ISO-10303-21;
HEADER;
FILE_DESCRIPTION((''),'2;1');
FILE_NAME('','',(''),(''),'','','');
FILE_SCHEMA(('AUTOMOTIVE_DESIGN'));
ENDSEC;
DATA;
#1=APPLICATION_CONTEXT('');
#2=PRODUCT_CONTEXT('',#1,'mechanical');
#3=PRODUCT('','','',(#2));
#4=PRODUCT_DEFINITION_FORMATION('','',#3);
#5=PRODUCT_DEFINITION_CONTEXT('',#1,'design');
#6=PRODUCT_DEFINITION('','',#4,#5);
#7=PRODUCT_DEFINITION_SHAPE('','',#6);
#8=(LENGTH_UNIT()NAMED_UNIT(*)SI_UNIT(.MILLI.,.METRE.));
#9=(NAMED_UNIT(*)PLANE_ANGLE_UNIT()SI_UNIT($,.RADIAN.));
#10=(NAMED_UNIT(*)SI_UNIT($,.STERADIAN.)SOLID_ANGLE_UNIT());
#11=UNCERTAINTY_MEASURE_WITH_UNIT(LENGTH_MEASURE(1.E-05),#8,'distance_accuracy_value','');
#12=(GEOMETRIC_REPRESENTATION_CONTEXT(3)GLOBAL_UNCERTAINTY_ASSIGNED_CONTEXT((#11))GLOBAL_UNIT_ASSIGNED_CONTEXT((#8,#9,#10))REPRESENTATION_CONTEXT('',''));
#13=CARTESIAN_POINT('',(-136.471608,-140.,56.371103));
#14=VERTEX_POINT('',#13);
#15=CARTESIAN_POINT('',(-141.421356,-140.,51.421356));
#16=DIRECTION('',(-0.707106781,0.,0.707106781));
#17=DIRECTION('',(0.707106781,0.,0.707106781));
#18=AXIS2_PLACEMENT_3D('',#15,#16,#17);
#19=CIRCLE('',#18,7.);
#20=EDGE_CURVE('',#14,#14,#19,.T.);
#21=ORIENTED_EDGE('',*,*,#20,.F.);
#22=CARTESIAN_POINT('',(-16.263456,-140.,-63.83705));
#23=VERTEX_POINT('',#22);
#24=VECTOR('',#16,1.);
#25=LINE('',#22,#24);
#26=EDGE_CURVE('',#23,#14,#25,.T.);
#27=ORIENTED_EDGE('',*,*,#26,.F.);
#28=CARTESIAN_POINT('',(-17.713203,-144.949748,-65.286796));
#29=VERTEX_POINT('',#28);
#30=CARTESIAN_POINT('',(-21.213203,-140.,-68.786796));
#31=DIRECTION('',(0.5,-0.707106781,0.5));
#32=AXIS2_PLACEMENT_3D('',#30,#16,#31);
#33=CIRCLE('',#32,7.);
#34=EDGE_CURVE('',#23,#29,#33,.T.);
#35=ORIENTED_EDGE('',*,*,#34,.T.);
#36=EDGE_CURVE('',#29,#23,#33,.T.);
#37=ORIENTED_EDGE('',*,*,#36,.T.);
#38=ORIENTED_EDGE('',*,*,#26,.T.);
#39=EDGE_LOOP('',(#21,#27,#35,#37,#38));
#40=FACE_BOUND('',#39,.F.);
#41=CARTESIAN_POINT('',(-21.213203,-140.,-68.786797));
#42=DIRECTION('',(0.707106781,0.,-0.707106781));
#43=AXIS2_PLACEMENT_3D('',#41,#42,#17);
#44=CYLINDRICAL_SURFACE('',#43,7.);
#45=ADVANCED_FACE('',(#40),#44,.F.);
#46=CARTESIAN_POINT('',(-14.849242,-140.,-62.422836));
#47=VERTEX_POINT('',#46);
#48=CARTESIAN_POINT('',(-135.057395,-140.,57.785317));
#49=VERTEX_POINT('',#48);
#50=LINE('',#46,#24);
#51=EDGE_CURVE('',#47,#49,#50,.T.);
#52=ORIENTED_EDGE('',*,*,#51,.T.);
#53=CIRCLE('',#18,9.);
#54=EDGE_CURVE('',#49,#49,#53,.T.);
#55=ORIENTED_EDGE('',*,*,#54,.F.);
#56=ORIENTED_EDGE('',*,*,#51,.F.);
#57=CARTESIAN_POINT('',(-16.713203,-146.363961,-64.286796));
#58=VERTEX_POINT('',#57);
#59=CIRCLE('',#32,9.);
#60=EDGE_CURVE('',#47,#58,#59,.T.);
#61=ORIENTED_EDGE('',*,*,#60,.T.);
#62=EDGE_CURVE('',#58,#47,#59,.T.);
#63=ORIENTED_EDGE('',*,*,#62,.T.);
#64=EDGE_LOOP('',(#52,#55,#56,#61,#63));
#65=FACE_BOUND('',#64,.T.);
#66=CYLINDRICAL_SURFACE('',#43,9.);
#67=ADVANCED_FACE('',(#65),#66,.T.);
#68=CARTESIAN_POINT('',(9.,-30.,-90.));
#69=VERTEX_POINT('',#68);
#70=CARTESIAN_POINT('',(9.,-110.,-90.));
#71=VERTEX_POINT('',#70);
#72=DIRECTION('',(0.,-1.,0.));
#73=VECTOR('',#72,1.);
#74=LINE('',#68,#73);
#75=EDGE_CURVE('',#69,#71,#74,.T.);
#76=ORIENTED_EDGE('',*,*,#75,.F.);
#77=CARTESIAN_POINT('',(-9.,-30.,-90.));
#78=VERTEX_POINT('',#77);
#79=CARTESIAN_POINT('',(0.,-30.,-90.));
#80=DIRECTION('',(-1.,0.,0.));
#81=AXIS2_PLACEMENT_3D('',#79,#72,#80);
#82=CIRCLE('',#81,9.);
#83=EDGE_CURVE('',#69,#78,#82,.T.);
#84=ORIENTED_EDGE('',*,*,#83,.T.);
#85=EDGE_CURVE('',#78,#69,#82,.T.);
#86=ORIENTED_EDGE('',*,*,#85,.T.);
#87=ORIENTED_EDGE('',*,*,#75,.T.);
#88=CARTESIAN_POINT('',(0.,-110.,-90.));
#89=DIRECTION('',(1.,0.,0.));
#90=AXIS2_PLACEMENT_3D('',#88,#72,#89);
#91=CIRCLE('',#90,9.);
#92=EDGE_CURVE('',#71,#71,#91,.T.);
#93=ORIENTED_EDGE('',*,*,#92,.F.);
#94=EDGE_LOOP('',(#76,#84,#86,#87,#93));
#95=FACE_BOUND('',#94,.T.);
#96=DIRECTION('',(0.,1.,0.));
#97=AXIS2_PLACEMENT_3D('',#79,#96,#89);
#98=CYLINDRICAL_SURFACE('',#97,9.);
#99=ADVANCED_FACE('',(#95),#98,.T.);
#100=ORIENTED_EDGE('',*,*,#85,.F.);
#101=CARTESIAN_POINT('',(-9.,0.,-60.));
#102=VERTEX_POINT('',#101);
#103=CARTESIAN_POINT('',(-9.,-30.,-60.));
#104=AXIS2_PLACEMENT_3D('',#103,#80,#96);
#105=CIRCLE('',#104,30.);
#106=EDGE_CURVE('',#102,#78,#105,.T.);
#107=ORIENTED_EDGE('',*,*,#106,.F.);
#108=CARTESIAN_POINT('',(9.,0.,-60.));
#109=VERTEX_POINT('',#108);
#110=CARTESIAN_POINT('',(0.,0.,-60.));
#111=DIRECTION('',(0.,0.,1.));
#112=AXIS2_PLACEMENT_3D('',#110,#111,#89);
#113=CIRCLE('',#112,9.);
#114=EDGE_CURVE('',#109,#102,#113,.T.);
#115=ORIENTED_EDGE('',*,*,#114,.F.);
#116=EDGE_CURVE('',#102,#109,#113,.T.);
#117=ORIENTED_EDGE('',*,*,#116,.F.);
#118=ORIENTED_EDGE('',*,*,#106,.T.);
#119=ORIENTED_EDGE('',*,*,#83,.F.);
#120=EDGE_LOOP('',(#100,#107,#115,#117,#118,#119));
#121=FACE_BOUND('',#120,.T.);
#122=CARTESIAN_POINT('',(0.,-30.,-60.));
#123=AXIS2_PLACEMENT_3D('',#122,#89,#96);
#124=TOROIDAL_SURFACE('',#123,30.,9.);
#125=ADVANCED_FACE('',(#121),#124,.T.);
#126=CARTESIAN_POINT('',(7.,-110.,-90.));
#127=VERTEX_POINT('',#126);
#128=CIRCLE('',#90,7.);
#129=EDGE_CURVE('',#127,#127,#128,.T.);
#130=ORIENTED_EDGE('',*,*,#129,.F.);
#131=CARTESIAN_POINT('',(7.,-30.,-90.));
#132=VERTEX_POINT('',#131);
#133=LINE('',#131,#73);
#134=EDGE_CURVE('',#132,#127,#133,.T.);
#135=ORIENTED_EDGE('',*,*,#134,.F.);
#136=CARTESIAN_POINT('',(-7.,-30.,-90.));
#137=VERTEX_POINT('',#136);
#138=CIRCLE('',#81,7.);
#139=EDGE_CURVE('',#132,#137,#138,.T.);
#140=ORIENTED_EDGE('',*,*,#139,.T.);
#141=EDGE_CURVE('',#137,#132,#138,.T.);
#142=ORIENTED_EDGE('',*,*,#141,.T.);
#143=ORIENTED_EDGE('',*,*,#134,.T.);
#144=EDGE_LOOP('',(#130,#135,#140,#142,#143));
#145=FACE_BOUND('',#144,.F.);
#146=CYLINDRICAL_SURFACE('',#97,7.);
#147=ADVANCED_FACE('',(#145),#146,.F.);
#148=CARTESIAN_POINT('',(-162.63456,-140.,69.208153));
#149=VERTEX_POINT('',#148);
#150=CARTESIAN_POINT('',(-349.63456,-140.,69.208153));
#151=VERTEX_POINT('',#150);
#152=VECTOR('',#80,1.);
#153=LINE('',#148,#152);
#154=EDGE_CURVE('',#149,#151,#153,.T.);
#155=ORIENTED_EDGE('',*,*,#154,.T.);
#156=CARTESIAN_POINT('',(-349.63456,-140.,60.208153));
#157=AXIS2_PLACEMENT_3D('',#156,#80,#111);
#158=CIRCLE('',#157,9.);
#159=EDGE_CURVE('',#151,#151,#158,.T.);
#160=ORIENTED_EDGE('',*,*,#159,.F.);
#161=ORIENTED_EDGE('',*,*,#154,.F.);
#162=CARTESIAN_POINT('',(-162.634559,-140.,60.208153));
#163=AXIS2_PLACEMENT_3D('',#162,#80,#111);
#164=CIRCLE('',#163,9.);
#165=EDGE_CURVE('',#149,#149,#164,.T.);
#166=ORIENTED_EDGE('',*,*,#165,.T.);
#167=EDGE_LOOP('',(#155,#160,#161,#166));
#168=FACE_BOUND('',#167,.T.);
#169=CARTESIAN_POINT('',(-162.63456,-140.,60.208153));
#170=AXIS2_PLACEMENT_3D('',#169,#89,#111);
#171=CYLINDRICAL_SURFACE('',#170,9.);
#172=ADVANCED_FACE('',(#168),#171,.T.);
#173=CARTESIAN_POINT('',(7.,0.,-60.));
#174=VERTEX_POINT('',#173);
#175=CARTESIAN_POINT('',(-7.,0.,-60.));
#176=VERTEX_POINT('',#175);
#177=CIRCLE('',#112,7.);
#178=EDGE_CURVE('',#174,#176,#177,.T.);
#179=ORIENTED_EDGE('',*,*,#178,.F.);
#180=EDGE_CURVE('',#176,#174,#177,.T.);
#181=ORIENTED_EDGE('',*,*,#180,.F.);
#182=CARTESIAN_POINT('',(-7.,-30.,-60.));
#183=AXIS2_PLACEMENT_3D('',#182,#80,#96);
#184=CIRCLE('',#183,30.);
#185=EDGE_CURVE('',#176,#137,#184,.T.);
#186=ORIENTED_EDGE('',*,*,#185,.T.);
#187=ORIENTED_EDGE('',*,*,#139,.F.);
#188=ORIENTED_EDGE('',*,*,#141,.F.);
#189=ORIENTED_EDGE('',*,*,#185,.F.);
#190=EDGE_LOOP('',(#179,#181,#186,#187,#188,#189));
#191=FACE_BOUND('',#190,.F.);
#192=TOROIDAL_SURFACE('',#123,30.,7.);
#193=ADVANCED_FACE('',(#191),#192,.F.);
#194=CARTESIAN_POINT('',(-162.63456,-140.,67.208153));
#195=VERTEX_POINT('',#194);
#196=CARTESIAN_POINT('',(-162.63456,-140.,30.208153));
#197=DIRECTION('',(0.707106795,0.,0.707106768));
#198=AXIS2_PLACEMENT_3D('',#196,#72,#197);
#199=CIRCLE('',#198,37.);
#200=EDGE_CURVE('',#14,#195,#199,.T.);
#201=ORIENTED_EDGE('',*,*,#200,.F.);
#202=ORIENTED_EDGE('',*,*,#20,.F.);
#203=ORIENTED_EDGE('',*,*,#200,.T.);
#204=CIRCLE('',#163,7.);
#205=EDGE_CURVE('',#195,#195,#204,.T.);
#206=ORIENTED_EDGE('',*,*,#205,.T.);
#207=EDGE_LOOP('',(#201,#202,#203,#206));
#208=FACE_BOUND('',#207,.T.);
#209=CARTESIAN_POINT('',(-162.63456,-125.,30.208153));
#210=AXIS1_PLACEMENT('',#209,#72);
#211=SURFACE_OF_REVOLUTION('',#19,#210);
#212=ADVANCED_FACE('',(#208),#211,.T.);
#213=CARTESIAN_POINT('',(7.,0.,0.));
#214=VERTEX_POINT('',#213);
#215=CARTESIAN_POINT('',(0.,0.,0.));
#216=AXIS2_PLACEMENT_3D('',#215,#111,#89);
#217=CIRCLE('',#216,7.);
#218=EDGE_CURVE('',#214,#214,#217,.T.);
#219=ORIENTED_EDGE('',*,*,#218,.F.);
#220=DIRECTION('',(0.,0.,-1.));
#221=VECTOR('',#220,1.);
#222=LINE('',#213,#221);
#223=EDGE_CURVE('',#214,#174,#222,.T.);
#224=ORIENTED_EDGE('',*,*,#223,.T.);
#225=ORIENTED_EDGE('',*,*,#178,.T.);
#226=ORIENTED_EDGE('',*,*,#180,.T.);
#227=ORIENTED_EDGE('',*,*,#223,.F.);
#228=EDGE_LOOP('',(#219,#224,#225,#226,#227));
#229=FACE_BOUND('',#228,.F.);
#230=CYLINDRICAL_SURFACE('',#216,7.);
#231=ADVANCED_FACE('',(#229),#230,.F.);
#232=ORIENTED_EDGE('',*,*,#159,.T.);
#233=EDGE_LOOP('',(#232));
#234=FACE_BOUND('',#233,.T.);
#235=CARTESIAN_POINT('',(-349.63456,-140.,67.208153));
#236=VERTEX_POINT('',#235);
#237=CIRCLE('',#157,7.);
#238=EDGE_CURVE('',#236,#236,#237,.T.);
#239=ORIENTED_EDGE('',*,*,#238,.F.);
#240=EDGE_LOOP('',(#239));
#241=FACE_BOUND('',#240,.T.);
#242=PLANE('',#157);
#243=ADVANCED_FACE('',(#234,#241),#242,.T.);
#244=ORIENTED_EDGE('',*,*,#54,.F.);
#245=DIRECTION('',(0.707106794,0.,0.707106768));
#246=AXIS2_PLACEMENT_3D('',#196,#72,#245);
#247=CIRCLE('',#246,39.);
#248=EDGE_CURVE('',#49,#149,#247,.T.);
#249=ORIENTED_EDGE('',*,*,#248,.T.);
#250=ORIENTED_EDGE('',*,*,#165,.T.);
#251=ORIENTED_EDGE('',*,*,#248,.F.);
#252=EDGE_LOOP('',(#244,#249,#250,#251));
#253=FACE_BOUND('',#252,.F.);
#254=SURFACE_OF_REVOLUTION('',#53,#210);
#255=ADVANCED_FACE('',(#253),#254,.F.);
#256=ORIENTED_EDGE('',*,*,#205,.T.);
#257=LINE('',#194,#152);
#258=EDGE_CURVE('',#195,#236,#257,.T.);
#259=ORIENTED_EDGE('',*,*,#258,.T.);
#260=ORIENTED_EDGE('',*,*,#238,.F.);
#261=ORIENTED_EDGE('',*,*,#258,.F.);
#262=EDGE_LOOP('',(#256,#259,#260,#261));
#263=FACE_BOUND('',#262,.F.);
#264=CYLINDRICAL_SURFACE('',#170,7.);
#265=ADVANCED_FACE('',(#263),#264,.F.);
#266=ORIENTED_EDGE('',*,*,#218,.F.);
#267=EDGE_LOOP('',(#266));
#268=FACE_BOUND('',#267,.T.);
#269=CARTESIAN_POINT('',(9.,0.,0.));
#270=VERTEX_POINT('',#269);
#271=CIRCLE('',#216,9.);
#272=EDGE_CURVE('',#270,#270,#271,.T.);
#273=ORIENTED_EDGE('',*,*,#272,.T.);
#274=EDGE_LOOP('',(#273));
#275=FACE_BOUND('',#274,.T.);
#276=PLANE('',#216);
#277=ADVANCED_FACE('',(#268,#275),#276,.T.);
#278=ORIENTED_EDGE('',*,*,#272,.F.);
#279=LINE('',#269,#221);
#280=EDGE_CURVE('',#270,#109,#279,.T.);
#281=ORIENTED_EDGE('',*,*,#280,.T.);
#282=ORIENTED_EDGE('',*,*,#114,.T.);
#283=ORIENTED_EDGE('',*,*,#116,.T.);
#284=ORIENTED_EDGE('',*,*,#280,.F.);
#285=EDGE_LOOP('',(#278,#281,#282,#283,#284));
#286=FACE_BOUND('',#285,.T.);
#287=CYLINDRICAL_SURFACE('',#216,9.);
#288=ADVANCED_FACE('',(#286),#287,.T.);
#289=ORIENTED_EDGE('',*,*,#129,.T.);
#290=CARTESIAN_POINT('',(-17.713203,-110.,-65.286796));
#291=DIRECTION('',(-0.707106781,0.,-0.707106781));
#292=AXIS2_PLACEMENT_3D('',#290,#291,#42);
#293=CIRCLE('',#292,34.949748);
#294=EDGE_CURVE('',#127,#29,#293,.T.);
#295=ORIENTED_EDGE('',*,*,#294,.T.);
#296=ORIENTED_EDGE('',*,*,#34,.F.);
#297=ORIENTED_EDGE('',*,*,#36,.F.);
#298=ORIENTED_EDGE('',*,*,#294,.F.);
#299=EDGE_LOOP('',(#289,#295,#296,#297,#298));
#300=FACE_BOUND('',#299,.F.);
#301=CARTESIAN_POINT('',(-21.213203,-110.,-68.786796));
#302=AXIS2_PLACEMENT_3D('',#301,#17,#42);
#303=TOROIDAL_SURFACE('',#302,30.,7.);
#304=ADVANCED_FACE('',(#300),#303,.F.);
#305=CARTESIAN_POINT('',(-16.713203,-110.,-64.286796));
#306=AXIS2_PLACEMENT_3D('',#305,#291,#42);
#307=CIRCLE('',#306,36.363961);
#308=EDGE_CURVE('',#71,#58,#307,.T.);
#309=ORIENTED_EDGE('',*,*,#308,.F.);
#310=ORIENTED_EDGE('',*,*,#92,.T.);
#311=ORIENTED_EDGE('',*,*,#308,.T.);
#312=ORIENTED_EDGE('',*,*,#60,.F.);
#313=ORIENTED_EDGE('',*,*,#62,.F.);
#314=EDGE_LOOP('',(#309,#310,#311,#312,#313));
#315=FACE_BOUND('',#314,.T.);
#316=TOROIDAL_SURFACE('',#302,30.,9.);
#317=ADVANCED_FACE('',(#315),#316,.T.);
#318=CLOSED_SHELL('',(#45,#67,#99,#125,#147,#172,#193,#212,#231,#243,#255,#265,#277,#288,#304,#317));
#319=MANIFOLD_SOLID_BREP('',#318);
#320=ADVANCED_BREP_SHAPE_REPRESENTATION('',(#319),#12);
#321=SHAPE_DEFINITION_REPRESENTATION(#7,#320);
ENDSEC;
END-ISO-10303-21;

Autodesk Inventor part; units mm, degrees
ref_plane "YZ Plane" through (0, 0, 0) normal (1, 0, 0) x (0, 1, 0)
ref_plane "XZ Plane" through (0, 0, 0) normal (0, 1, 0) x (-1, 0, 0)
ref_plane "XY Plane" through (0, 0, 0) normal (0, 0, 1) x (1, 0, 0)
sketch "Esboço1" plane through (0, 0, 0) normal (0, 0, 1) x (1, 0, 0)
  circle A0 centre (0, 0) radius 7
  circle A1 centre (0, 0) radius 9
  dimension "d0" = 14
  dimension "d1" = 18
sketch "Esboço1 outline for Extrusão1" plane through (0, 0, 0) normal (0, 0, 1) x (1, 0, 0)
  circle A0 centre (0, 0) radius 9
  circle A1 centre (0, 0) radius 7
extrude "Extrusão1" add sketch "Esboço1 outline for Extrusão1" against normal blind 60
sketch "Esboço8" plane through (0, 0, -60) normal (0, 0, -1) x (-1, 0, 0)
  circle A0 centre (0, 0) radius 9 projected
  circle A1 centre (0, 0) radius 7 projected
  line L0 (0, 0) -> (0, -30)
  line L1 (-15, -30) -> (15, -30)
  dimension "d18" = 30
  dimension "d19" = 30
sketch "Esboço8 outline for Revolução4" plane through (0, 0, -60) normal (0, 0, -1) x (-1, 0, 0)
  circle A0 centre (0, 0) radius 9
  circle A1 centre (0, 0) radius 7
revolve "Revolução4" add sketch "Esboço8 outline for Revolução4" angle 90 about axis through (15, -30, -60) along (-1, 0, 0)
sketch "Esboço9" plane through (0, -30, -90) normal (0, -1, 0) x (1, 0, 0)
  circle A0 centre (0, 0) radius 9 projected
  circle A1 centre (0, 0) radius 7 projected
  point P0 (0, 90)
sketch "Esboço9 outline for Extrusão3" plane through (0, -30, -90) normal (0, -1, 0) x (1, 0, 0)
  circle A0 centre (0, 0) radius 9
  circle A1 centre (0, 0) radius 7
extrude "Extrusão3" add sketch "Esboço9 outline for Extrusão3" along normal blind 80
sketch "Esboço10" plane through (0, -110, -90) normal (0, -1, 0) x (1, 0, 0)
  circle A0 centre (0, 0) radius 9
  circle A1 centre (0, 0) radius 7
  line L0 (0, 0) -> (-21.213203, 21.213203)
  line L1 (0, 0) -> (0, 30)
  line L2 (-10.606602, 31.819805) -> (-31.819805, 10.606602)
  point P0 (0, 90)
  dimension "d23" = 30
  dimension "d24" = 45
  dimension "d25" = 30
  dimension "d26" = 30
sketch "Esboço10 outline for Revolução5" plane through (0, -110, -90) normal (0, -1, 0) x (1, 0, 0)
  circle A0 centre (0, 0) radius 9
  circle A1 centre (0, 0) radius 7
revolve "Revolução5" add sketch "Esboço10 outline for Revolução5" angle 90 about axis through (-10.606602, -110, -58.180195) along (-0.7071068, 0, -0.7071068)
sketch "Esboço11" plane through (-21.213203, -140, -68.786797) normal (-0.7071068, 0, 0.7071068) x (0.7071068, 0, 0.7071068)
  circle A0 centre (0, 0) radius 9 projected
  circle A1 centre (0, 0) radius 7 projected
  point P0 (63.63961, 140)
sketch "Esboço11 outline for Extrusão4" plane through (-21.213203, -140, -68.786797) normal (-0.7071068, 0, 0.7071068) x (0.7071068, 0, 0.7071068)
  circle A0 centre (0, 0) radius 9
  circle A1 centre (0, 0) radius 7
extrude "Extrusão4" add sketch "Esboço11 outline for Extrusão4" along normal blind 170
sketch "Esboço12" plane through (-141.421356, -140, 51.421356) normal (-0.7071068, 0, 0.7071068) x (0.7071068, 0, 0.7071068)
  circle A0 centre (0, 0) radius 9 projected
  circle A1 centre (0, 0) radius 7 projected
  line L0 (0, 0) -> (-30, 0)
  line L1 (-30, 15) -> (-30, -15)
  point P0 (63.63961, 140)
  dimension "d30" = 30
  dimension "d31" = 30
sketch "Esboço12 outline for Revolução6" plane through (-141.421356, -140, 51.421356) normal (-0.7071068, 0, 0.7071068) x (0.7071068, 0, 0.7071068)
  circle A0 centre (0, 0) radius 9
  circle A1 centre (0, 0) radius 7
revolve "Revolução6" add sketch "Esboço12 outline for Revolução6" angle 45 about axis through (-162.63456, -125, 30.208153) along (0, -1, 0)
sketch "Esboço13" plane through (-162.63456, -140, 60.208153) normal (-1, 0, 0) x (0, 0, 1)
  circle A0 centre (0, 0) radius 9 projected
  circle A1 centre (0, 0) radius 7 projected
  point P0 (-60.208153, 140)
sketch "Esboço13 outline for Extrusão5" plane through (-162.63456, -140, 60.208153) normal (-1, 0, 0) x (0, 0, 1)
  circle A0 centre (0, 0) radius 9
  circle A1 centre (0, 0) radius 7
extrude "Extrusão5" add sketch "Esboço13 outline for Extrusão5" along normal blind 187
